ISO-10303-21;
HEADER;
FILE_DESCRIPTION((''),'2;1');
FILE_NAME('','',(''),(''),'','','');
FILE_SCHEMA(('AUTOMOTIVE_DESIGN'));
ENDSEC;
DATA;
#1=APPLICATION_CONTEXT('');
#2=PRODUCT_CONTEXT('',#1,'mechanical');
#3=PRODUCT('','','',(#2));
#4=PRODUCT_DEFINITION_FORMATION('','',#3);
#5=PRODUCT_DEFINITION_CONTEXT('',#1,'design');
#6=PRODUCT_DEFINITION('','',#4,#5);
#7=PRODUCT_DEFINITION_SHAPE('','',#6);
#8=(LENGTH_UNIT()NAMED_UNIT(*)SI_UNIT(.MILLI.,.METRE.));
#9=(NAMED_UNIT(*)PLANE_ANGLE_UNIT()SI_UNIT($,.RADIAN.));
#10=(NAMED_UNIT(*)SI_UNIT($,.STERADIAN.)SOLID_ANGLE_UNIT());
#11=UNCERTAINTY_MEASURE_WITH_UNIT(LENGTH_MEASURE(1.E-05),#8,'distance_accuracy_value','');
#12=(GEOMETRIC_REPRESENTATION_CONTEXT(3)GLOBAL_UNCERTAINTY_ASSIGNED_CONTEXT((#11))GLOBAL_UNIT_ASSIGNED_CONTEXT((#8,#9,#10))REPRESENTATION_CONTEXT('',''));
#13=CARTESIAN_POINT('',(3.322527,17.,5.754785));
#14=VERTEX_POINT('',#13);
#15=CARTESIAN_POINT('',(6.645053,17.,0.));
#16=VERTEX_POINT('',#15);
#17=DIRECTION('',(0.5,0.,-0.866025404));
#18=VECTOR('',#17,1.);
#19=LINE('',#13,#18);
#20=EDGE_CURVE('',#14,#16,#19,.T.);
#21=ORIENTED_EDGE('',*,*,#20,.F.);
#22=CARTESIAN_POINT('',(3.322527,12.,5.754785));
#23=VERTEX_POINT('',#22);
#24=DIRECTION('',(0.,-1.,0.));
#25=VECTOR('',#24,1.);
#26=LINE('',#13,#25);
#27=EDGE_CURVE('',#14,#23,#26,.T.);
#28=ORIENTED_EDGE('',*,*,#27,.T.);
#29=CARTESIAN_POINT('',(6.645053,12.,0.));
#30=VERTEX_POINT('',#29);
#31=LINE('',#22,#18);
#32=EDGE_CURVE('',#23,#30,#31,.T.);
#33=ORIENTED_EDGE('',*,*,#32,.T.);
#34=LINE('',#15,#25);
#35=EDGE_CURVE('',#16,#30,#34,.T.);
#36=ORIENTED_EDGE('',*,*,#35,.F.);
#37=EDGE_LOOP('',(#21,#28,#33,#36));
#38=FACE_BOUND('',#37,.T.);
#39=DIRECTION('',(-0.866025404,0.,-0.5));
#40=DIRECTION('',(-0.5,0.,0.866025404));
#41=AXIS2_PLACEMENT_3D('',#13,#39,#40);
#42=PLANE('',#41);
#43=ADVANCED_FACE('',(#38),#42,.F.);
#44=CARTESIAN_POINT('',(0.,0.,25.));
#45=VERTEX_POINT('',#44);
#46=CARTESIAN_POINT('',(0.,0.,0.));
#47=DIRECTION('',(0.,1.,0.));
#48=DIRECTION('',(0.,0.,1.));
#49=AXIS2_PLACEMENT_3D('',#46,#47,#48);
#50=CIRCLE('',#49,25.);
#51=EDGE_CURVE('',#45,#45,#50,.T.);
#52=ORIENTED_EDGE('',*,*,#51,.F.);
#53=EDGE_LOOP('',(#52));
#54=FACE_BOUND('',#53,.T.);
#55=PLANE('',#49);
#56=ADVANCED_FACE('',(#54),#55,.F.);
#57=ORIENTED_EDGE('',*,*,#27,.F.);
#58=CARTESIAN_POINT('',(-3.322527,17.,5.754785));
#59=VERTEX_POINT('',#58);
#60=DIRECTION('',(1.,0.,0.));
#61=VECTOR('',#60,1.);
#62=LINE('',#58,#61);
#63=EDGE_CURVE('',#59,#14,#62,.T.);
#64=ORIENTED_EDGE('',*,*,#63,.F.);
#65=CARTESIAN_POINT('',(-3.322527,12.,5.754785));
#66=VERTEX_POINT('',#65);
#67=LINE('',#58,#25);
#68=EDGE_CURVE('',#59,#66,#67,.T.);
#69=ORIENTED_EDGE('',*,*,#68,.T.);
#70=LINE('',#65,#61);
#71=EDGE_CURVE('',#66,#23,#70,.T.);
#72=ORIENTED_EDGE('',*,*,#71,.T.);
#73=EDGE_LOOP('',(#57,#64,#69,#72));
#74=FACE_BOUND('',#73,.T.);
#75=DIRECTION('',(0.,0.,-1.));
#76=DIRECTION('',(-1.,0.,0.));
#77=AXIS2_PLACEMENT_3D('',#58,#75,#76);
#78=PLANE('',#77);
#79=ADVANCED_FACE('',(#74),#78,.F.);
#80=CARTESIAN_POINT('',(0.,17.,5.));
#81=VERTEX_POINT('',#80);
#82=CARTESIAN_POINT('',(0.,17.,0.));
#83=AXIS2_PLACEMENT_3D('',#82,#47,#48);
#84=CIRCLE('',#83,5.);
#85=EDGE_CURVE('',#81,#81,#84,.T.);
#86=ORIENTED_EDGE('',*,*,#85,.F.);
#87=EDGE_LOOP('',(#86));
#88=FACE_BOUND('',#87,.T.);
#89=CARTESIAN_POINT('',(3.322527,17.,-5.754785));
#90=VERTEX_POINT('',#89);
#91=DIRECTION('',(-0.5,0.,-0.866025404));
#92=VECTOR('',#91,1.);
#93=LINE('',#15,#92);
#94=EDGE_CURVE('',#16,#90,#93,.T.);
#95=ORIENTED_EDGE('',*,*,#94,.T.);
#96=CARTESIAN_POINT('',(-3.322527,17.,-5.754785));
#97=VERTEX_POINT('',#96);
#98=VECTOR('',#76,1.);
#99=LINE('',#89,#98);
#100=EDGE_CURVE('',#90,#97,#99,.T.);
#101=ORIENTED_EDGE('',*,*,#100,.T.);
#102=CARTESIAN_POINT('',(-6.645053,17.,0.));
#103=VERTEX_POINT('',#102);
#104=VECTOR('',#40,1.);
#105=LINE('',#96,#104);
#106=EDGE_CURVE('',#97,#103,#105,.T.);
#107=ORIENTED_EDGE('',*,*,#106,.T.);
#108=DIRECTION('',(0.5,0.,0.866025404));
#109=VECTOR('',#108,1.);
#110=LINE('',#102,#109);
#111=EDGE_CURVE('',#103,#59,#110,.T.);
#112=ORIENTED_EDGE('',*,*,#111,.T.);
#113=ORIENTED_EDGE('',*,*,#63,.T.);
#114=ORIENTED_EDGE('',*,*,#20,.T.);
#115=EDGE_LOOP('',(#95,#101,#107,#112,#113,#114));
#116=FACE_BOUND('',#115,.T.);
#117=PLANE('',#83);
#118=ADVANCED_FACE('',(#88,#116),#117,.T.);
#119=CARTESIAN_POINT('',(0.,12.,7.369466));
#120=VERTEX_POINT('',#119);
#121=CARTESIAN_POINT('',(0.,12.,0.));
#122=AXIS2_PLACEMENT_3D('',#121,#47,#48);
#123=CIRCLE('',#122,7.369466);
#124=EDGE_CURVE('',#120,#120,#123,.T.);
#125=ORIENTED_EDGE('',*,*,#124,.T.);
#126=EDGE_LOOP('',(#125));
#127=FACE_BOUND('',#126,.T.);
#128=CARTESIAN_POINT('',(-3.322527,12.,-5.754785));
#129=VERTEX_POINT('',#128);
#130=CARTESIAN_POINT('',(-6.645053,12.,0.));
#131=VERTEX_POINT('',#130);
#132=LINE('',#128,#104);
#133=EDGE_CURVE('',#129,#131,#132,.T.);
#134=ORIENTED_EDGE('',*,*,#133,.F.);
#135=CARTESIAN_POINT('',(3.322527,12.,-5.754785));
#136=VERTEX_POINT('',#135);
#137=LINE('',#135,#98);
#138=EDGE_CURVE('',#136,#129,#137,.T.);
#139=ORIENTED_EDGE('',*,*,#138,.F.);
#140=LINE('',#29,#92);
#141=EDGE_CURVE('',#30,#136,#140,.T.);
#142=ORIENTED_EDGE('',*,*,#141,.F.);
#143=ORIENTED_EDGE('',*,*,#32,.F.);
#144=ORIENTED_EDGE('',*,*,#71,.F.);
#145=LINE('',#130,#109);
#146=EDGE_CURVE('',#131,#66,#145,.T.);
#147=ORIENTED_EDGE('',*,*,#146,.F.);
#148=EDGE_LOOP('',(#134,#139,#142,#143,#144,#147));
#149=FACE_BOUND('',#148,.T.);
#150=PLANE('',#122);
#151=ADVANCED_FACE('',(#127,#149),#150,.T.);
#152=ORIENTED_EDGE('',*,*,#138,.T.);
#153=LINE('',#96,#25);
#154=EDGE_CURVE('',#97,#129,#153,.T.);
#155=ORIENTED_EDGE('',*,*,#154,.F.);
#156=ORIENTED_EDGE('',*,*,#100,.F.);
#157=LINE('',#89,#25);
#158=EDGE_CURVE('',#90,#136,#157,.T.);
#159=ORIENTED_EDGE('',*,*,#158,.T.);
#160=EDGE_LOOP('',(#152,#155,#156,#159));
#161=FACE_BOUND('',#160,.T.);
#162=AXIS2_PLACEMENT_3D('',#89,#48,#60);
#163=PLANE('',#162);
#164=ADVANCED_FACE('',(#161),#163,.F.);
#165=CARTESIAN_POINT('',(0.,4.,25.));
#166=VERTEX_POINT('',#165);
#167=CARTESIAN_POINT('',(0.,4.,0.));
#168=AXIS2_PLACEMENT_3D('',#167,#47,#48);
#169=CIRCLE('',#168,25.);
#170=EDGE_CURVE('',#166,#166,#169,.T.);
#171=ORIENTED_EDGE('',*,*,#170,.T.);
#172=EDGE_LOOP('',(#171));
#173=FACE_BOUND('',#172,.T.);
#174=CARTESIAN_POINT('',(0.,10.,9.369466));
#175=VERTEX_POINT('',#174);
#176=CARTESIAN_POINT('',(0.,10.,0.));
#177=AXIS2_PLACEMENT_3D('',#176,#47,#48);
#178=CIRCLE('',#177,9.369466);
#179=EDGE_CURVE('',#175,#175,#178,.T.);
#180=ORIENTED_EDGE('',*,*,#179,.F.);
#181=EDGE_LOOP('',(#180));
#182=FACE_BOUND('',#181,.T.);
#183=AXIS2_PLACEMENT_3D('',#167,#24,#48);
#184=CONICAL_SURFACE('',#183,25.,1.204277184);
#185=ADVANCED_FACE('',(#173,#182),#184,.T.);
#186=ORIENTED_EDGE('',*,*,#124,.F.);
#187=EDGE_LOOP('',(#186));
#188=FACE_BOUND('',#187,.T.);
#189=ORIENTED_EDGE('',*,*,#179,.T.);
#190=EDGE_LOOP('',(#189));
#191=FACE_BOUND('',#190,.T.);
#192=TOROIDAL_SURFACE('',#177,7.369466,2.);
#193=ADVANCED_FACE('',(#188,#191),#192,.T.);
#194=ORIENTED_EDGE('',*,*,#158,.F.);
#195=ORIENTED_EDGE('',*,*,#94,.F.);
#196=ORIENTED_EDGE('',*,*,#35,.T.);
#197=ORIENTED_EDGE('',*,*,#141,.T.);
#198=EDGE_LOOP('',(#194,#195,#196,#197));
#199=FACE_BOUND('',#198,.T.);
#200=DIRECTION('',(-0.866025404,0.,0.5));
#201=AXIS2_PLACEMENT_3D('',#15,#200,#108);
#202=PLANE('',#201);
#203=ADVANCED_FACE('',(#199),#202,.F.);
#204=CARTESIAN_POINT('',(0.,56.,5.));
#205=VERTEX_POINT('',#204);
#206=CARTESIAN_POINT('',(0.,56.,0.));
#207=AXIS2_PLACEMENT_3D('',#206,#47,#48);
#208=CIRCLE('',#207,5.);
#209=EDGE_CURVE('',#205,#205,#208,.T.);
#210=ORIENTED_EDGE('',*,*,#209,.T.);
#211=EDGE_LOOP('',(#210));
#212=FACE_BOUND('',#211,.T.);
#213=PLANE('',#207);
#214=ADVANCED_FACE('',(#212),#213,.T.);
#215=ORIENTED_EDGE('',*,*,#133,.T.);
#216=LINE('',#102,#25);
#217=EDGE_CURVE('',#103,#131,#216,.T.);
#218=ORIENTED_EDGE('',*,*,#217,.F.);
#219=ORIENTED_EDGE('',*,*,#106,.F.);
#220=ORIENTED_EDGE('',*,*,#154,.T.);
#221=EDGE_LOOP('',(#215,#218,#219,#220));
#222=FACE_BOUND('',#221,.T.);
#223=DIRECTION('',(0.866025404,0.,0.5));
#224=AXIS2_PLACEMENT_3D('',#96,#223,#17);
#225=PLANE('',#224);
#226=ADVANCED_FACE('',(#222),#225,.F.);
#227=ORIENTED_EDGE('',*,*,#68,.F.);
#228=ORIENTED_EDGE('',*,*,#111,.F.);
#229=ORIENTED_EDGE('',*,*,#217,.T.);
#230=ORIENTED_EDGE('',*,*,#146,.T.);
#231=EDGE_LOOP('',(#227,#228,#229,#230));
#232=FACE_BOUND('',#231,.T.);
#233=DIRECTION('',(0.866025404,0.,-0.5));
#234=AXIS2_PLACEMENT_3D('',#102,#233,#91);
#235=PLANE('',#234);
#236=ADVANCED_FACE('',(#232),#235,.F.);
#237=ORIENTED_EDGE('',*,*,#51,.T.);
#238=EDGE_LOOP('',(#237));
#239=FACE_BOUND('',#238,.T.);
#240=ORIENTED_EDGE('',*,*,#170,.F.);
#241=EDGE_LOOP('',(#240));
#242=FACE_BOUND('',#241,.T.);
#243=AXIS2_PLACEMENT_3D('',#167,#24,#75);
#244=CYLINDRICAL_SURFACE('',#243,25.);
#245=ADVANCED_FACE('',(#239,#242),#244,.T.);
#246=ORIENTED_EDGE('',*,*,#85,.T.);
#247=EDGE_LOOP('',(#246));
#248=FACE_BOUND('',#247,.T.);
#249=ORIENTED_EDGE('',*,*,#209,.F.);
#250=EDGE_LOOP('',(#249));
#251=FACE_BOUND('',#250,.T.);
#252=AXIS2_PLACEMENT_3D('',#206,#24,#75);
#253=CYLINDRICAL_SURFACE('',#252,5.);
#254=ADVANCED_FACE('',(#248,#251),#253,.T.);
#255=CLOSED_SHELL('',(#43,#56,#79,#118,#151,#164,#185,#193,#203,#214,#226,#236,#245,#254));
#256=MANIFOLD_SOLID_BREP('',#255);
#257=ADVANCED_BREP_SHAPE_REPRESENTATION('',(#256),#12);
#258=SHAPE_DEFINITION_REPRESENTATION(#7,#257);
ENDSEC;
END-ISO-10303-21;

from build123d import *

# Parameters (mm, degrees)
SKETCH2_R           = 25
BOSS_EXTRUDE1_DEPTH = 4
SKETCH4_R           = 25
BOSS_EXTRUDE2_DEPTH = 6
BOSS_EXTRUDE2_TAPER = 69
SKETCH5_R           = 9.369465612
BOSS_EXTRUDE3_DEPTH = 2
SKETCH6_R           = 5
BOSS_EXTRUDE4_DEPTH = 44
FILLET1_R           = 2
BOSS_EXTRUDE5_DEPTH = 5


with BuildPart() as part:
    # Sketch2 → Boss-Extrude1 (new body)
    with BuildSketch(Plane(origin=(0, 0, 0), x_dir=(1, 0, 0), z_dir=(0, 1, 0))):
        with Locations(Location((0, 0, 0), (0, 0, 270))):
            Circle(SKETCH2_R)
    extrude(amount=BOSS_EXTRUDE1_DEPTH)

    # Sketch4 → Boss-Extrude2 (add)
    with BuildSketch(Plane(origin=(0, 4, 0), x_dir=(1, 0, 0), z_dir=(0, 1, 0))):
        with Locations(Location((0, 0, 0), (0, 0, 270))):
            Circle(SKETCH4_R)
    extrude(amount=BOSS_EXTRUDE2_DEPTH, taper=BOSS_EXTRUDE2_TAPER)

    # Sketch5 → Boss-Extrude3 (add)
    with BuildSketch(Plane(origin=(0, 10, 0), x_dir=(1, 0, 0), z_dir=(0, 1, 0))):
        with Locations(Location((0, 0, 0), (0, 0, 270))):
            Circle(SKETCH5_R)
    extrude(amount=BOSS_EXTRUDE3_DEPTH)

    # Sketch6 → Boss-Extrude4 (add)
    with BuildSketch(Plane(origin=(0, 12, 0), x_dir=(1, 0, 0), z_dir=(0, 1, 0))):
        with Locations(Location((0, 0, 0), (0, 0, 270))):
            Circle(SKETCH6_R)
    extrude(amount=BOSS_EXTRUDE4_DEPTH)

    # Fillet1
    fillet1_edges = [part.edges().sort_by_distance(p)[0] for p in [
        (0, 12, -9.369465612),
    ]]
    fillet(fillet1_edges, radius=FILLET1_R - 0.0001)  # a hair under: the kernel refuses the full size

    # Sketch7 → Boss-Extrude5 (add)
    with BuildSketch(Plane(origin=(0, 12, 0), x_dir=(1, 0, 0), z_dir=(0, 1, 0))):
        Polygon((6.645053271, 0), (3.322526636, 5.754784943), (-3.322526636, 5.754784943), (-6.645053271, 0), (-3.322526636, -5.754784943), (3.322526636, -5.754784943), align=None)
    extrude(amount=BOSS_EXTRUDE5_DEPTH)


solid = part.part
